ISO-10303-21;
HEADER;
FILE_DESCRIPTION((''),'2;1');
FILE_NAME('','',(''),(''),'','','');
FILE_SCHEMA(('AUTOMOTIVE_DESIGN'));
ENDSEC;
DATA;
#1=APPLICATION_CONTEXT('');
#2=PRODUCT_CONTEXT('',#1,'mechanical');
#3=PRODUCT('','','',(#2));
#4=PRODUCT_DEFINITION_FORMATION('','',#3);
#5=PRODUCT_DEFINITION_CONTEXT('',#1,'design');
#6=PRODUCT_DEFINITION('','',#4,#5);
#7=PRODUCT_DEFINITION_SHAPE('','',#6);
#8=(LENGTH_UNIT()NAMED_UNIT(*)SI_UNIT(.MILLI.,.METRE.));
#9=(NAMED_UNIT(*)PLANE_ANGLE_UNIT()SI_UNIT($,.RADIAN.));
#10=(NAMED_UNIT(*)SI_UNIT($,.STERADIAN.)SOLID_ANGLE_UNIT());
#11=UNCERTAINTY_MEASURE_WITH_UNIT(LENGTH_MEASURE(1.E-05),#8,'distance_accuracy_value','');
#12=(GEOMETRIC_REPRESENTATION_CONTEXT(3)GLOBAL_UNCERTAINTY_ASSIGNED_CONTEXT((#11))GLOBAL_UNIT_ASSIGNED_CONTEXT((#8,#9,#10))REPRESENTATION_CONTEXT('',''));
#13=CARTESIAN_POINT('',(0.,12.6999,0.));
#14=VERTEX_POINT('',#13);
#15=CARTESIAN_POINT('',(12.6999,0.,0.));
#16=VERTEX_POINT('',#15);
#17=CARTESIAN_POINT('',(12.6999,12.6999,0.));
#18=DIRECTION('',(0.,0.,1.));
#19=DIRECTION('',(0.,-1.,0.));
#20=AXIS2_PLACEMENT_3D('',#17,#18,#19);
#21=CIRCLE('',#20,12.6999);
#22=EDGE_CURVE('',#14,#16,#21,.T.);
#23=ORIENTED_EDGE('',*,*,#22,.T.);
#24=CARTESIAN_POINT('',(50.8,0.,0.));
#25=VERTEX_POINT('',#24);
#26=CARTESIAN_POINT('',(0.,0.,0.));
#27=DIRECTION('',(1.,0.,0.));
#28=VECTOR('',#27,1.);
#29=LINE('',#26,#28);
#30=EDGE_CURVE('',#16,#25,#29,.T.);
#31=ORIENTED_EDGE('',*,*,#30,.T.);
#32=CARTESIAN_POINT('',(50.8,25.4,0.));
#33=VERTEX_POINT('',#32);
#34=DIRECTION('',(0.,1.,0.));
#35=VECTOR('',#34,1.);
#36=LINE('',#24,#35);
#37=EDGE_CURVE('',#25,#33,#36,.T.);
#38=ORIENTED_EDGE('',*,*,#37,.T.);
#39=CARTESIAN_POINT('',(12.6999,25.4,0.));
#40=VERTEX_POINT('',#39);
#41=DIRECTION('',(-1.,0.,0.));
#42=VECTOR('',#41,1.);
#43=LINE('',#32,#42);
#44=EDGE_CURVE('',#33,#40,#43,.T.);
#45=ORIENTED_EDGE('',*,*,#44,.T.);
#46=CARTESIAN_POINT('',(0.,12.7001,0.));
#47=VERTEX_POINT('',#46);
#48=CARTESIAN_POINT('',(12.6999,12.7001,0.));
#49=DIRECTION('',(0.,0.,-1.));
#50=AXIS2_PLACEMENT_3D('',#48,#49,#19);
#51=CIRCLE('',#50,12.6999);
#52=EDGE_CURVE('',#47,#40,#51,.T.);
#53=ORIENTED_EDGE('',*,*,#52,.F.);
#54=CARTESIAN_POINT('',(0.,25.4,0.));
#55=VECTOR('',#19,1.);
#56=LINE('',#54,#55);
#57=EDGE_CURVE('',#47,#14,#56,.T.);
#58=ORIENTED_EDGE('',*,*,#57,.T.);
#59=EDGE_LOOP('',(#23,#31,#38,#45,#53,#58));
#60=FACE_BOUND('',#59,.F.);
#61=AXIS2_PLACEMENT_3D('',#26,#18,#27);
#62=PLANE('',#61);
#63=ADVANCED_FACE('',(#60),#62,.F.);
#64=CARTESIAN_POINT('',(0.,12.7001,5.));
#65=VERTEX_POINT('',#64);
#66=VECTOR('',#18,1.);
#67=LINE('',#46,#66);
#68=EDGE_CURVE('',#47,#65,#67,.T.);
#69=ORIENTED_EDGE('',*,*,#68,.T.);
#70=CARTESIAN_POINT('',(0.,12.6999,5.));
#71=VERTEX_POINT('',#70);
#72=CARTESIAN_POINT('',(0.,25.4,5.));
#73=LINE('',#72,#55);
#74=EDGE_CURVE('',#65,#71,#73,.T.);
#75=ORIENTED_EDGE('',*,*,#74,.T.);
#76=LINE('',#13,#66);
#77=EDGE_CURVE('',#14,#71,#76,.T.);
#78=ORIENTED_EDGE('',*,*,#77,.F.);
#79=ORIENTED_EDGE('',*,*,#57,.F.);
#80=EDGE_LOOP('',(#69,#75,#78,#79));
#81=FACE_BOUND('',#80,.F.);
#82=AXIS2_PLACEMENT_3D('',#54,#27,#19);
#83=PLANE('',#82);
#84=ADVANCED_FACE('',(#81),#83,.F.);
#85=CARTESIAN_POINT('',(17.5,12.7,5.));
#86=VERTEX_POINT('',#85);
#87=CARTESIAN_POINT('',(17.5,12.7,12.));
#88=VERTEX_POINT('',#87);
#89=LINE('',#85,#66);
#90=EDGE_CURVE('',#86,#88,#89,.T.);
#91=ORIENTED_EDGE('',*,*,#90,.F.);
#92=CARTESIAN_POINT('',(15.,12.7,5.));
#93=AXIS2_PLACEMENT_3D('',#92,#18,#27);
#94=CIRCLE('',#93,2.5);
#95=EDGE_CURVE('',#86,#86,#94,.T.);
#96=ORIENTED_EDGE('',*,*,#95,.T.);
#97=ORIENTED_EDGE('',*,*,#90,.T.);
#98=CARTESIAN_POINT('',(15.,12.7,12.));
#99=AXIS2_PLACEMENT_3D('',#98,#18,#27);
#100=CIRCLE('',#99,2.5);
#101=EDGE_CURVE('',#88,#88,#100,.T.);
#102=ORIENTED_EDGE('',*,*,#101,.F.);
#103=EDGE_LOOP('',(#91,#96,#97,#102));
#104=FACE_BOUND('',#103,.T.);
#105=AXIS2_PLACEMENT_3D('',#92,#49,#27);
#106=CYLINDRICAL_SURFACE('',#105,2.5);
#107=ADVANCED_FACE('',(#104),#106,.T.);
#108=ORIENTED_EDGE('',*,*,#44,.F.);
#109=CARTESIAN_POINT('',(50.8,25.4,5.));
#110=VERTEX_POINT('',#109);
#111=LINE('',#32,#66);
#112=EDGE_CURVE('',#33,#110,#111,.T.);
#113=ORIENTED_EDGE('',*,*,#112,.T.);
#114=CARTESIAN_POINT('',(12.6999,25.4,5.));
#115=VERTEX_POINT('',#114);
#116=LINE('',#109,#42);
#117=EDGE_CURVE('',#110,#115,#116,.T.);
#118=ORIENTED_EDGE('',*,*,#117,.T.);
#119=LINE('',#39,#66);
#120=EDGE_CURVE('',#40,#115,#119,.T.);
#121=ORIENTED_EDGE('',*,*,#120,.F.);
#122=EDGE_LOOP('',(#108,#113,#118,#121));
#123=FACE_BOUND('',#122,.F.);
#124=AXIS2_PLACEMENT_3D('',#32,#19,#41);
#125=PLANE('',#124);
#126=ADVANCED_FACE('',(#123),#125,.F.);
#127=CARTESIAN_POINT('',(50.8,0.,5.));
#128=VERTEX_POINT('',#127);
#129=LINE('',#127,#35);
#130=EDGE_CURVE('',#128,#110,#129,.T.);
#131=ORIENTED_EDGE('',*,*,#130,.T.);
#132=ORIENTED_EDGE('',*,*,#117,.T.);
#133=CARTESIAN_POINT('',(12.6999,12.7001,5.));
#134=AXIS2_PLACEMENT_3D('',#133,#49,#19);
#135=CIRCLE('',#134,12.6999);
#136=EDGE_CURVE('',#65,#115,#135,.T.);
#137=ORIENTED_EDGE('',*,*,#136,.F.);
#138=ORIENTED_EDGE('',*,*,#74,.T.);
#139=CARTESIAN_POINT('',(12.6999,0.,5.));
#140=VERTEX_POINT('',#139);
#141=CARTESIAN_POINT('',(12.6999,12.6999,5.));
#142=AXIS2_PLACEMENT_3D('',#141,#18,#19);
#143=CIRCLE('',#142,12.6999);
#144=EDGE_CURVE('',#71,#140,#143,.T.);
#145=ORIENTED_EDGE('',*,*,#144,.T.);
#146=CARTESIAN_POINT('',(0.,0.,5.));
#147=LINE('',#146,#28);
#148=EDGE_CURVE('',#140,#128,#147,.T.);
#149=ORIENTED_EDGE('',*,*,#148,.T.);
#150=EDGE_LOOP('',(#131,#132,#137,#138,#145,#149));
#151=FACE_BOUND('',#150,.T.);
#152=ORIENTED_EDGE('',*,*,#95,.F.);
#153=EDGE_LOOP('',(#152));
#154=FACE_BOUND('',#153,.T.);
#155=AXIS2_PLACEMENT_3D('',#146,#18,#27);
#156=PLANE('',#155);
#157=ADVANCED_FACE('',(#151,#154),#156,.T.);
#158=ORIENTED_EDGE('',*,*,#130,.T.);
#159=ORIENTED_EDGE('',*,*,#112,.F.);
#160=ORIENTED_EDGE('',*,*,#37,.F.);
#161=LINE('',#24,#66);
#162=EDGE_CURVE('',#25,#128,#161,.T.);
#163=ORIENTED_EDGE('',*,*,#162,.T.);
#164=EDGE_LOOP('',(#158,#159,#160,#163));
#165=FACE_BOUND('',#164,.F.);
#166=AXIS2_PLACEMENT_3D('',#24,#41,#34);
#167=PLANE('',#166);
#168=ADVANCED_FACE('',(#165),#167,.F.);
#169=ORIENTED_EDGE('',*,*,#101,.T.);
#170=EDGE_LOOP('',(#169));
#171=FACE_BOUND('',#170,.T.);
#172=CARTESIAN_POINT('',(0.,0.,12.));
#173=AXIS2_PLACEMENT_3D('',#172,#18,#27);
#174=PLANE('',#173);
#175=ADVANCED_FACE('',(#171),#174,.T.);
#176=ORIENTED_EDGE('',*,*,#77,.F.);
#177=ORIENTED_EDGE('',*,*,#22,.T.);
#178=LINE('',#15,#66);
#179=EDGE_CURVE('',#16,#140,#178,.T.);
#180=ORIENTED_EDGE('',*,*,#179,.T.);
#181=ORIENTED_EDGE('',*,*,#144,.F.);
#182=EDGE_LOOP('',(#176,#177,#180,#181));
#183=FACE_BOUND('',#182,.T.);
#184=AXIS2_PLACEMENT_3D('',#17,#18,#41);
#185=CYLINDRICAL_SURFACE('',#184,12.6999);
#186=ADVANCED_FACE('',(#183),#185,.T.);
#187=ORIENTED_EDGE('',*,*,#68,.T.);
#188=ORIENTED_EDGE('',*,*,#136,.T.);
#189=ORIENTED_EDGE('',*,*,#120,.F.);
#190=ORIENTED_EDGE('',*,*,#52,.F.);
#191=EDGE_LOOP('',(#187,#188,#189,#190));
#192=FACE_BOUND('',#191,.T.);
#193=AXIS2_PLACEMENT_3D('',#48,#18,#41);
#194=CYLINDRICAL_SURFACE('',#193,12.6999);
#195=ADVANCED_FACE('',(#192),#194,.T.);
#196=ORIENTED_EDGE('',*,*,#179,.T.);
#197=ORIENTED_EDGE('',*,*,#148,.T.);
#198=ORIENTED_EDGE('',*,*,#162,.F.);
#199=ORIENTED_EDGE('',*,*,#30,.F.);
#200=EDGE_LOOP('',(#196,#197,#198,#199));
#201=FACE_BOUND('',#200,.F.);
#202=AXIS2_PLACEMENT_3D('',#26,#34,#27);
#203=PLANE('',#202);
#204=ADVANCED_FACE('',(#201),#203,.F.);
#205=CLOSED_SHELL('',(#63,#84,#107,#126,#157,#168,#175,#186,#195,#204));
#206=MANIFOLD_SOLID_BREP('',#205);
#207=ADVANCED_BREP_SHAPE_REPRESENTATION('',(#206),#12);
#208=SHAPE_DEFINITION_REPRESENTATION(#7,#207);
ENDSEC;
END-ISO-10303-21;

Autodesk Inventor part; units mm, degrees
ref_plane "YZ Plane" through (0, 0, 0) normal (1, 0, 0) x (0, 1, 0)
ref_plane "XZ Plane" through (0, 0, 0) normal (0, 1, 0) x (-1, 0, 0)
ref_plane "XY Plane" through (0, 0, 0) normal (0, 0, 1) x (1, 0, 0)
sketch "Sketch1" plane through (0, 0, 0) normal (0, 0, 1) x (1, 0, 0)
  line L0 (0, 0) -> (50.8, 0)
  line L1 (50.8, 0) -> (50.8, 25.4)
  line L2 (50.8, 25.4) -> (0, 25.4)
  line L3 (0, 25.4) -> (0, 0)
  dimension "d0" = 50.8
  dimension "d1" = 25.4
extrude "Extrusion1" add sketch "Sketch1" along normal blind 5
sketch "Sketch2" plane through (0, 0, 5) normal (0, 0, 1) x (1, 0, 0)
  circle A0 centre (15, 12.7) radius 2.5
  line L0 (0, 25.4) -> (0, 0) projected
  line L1 (50.8, 0) -> (50.8, 25.4) projected
  point P0 (50.8, 12.7)
  dimension "d4" = 5
  dimension "d5" = 15
extrude "Extrusion2" add sketch "Sketch2" along normal blind 7
full round fillet "Fillet1" first side at (16.9333, 0, 1.6667) centre faces at (0, 16.9333, 3.3333) second side at (33.8667, 25.4, 1.6667)
properties part number "Tilt_Camera_Side_Plate_2"
